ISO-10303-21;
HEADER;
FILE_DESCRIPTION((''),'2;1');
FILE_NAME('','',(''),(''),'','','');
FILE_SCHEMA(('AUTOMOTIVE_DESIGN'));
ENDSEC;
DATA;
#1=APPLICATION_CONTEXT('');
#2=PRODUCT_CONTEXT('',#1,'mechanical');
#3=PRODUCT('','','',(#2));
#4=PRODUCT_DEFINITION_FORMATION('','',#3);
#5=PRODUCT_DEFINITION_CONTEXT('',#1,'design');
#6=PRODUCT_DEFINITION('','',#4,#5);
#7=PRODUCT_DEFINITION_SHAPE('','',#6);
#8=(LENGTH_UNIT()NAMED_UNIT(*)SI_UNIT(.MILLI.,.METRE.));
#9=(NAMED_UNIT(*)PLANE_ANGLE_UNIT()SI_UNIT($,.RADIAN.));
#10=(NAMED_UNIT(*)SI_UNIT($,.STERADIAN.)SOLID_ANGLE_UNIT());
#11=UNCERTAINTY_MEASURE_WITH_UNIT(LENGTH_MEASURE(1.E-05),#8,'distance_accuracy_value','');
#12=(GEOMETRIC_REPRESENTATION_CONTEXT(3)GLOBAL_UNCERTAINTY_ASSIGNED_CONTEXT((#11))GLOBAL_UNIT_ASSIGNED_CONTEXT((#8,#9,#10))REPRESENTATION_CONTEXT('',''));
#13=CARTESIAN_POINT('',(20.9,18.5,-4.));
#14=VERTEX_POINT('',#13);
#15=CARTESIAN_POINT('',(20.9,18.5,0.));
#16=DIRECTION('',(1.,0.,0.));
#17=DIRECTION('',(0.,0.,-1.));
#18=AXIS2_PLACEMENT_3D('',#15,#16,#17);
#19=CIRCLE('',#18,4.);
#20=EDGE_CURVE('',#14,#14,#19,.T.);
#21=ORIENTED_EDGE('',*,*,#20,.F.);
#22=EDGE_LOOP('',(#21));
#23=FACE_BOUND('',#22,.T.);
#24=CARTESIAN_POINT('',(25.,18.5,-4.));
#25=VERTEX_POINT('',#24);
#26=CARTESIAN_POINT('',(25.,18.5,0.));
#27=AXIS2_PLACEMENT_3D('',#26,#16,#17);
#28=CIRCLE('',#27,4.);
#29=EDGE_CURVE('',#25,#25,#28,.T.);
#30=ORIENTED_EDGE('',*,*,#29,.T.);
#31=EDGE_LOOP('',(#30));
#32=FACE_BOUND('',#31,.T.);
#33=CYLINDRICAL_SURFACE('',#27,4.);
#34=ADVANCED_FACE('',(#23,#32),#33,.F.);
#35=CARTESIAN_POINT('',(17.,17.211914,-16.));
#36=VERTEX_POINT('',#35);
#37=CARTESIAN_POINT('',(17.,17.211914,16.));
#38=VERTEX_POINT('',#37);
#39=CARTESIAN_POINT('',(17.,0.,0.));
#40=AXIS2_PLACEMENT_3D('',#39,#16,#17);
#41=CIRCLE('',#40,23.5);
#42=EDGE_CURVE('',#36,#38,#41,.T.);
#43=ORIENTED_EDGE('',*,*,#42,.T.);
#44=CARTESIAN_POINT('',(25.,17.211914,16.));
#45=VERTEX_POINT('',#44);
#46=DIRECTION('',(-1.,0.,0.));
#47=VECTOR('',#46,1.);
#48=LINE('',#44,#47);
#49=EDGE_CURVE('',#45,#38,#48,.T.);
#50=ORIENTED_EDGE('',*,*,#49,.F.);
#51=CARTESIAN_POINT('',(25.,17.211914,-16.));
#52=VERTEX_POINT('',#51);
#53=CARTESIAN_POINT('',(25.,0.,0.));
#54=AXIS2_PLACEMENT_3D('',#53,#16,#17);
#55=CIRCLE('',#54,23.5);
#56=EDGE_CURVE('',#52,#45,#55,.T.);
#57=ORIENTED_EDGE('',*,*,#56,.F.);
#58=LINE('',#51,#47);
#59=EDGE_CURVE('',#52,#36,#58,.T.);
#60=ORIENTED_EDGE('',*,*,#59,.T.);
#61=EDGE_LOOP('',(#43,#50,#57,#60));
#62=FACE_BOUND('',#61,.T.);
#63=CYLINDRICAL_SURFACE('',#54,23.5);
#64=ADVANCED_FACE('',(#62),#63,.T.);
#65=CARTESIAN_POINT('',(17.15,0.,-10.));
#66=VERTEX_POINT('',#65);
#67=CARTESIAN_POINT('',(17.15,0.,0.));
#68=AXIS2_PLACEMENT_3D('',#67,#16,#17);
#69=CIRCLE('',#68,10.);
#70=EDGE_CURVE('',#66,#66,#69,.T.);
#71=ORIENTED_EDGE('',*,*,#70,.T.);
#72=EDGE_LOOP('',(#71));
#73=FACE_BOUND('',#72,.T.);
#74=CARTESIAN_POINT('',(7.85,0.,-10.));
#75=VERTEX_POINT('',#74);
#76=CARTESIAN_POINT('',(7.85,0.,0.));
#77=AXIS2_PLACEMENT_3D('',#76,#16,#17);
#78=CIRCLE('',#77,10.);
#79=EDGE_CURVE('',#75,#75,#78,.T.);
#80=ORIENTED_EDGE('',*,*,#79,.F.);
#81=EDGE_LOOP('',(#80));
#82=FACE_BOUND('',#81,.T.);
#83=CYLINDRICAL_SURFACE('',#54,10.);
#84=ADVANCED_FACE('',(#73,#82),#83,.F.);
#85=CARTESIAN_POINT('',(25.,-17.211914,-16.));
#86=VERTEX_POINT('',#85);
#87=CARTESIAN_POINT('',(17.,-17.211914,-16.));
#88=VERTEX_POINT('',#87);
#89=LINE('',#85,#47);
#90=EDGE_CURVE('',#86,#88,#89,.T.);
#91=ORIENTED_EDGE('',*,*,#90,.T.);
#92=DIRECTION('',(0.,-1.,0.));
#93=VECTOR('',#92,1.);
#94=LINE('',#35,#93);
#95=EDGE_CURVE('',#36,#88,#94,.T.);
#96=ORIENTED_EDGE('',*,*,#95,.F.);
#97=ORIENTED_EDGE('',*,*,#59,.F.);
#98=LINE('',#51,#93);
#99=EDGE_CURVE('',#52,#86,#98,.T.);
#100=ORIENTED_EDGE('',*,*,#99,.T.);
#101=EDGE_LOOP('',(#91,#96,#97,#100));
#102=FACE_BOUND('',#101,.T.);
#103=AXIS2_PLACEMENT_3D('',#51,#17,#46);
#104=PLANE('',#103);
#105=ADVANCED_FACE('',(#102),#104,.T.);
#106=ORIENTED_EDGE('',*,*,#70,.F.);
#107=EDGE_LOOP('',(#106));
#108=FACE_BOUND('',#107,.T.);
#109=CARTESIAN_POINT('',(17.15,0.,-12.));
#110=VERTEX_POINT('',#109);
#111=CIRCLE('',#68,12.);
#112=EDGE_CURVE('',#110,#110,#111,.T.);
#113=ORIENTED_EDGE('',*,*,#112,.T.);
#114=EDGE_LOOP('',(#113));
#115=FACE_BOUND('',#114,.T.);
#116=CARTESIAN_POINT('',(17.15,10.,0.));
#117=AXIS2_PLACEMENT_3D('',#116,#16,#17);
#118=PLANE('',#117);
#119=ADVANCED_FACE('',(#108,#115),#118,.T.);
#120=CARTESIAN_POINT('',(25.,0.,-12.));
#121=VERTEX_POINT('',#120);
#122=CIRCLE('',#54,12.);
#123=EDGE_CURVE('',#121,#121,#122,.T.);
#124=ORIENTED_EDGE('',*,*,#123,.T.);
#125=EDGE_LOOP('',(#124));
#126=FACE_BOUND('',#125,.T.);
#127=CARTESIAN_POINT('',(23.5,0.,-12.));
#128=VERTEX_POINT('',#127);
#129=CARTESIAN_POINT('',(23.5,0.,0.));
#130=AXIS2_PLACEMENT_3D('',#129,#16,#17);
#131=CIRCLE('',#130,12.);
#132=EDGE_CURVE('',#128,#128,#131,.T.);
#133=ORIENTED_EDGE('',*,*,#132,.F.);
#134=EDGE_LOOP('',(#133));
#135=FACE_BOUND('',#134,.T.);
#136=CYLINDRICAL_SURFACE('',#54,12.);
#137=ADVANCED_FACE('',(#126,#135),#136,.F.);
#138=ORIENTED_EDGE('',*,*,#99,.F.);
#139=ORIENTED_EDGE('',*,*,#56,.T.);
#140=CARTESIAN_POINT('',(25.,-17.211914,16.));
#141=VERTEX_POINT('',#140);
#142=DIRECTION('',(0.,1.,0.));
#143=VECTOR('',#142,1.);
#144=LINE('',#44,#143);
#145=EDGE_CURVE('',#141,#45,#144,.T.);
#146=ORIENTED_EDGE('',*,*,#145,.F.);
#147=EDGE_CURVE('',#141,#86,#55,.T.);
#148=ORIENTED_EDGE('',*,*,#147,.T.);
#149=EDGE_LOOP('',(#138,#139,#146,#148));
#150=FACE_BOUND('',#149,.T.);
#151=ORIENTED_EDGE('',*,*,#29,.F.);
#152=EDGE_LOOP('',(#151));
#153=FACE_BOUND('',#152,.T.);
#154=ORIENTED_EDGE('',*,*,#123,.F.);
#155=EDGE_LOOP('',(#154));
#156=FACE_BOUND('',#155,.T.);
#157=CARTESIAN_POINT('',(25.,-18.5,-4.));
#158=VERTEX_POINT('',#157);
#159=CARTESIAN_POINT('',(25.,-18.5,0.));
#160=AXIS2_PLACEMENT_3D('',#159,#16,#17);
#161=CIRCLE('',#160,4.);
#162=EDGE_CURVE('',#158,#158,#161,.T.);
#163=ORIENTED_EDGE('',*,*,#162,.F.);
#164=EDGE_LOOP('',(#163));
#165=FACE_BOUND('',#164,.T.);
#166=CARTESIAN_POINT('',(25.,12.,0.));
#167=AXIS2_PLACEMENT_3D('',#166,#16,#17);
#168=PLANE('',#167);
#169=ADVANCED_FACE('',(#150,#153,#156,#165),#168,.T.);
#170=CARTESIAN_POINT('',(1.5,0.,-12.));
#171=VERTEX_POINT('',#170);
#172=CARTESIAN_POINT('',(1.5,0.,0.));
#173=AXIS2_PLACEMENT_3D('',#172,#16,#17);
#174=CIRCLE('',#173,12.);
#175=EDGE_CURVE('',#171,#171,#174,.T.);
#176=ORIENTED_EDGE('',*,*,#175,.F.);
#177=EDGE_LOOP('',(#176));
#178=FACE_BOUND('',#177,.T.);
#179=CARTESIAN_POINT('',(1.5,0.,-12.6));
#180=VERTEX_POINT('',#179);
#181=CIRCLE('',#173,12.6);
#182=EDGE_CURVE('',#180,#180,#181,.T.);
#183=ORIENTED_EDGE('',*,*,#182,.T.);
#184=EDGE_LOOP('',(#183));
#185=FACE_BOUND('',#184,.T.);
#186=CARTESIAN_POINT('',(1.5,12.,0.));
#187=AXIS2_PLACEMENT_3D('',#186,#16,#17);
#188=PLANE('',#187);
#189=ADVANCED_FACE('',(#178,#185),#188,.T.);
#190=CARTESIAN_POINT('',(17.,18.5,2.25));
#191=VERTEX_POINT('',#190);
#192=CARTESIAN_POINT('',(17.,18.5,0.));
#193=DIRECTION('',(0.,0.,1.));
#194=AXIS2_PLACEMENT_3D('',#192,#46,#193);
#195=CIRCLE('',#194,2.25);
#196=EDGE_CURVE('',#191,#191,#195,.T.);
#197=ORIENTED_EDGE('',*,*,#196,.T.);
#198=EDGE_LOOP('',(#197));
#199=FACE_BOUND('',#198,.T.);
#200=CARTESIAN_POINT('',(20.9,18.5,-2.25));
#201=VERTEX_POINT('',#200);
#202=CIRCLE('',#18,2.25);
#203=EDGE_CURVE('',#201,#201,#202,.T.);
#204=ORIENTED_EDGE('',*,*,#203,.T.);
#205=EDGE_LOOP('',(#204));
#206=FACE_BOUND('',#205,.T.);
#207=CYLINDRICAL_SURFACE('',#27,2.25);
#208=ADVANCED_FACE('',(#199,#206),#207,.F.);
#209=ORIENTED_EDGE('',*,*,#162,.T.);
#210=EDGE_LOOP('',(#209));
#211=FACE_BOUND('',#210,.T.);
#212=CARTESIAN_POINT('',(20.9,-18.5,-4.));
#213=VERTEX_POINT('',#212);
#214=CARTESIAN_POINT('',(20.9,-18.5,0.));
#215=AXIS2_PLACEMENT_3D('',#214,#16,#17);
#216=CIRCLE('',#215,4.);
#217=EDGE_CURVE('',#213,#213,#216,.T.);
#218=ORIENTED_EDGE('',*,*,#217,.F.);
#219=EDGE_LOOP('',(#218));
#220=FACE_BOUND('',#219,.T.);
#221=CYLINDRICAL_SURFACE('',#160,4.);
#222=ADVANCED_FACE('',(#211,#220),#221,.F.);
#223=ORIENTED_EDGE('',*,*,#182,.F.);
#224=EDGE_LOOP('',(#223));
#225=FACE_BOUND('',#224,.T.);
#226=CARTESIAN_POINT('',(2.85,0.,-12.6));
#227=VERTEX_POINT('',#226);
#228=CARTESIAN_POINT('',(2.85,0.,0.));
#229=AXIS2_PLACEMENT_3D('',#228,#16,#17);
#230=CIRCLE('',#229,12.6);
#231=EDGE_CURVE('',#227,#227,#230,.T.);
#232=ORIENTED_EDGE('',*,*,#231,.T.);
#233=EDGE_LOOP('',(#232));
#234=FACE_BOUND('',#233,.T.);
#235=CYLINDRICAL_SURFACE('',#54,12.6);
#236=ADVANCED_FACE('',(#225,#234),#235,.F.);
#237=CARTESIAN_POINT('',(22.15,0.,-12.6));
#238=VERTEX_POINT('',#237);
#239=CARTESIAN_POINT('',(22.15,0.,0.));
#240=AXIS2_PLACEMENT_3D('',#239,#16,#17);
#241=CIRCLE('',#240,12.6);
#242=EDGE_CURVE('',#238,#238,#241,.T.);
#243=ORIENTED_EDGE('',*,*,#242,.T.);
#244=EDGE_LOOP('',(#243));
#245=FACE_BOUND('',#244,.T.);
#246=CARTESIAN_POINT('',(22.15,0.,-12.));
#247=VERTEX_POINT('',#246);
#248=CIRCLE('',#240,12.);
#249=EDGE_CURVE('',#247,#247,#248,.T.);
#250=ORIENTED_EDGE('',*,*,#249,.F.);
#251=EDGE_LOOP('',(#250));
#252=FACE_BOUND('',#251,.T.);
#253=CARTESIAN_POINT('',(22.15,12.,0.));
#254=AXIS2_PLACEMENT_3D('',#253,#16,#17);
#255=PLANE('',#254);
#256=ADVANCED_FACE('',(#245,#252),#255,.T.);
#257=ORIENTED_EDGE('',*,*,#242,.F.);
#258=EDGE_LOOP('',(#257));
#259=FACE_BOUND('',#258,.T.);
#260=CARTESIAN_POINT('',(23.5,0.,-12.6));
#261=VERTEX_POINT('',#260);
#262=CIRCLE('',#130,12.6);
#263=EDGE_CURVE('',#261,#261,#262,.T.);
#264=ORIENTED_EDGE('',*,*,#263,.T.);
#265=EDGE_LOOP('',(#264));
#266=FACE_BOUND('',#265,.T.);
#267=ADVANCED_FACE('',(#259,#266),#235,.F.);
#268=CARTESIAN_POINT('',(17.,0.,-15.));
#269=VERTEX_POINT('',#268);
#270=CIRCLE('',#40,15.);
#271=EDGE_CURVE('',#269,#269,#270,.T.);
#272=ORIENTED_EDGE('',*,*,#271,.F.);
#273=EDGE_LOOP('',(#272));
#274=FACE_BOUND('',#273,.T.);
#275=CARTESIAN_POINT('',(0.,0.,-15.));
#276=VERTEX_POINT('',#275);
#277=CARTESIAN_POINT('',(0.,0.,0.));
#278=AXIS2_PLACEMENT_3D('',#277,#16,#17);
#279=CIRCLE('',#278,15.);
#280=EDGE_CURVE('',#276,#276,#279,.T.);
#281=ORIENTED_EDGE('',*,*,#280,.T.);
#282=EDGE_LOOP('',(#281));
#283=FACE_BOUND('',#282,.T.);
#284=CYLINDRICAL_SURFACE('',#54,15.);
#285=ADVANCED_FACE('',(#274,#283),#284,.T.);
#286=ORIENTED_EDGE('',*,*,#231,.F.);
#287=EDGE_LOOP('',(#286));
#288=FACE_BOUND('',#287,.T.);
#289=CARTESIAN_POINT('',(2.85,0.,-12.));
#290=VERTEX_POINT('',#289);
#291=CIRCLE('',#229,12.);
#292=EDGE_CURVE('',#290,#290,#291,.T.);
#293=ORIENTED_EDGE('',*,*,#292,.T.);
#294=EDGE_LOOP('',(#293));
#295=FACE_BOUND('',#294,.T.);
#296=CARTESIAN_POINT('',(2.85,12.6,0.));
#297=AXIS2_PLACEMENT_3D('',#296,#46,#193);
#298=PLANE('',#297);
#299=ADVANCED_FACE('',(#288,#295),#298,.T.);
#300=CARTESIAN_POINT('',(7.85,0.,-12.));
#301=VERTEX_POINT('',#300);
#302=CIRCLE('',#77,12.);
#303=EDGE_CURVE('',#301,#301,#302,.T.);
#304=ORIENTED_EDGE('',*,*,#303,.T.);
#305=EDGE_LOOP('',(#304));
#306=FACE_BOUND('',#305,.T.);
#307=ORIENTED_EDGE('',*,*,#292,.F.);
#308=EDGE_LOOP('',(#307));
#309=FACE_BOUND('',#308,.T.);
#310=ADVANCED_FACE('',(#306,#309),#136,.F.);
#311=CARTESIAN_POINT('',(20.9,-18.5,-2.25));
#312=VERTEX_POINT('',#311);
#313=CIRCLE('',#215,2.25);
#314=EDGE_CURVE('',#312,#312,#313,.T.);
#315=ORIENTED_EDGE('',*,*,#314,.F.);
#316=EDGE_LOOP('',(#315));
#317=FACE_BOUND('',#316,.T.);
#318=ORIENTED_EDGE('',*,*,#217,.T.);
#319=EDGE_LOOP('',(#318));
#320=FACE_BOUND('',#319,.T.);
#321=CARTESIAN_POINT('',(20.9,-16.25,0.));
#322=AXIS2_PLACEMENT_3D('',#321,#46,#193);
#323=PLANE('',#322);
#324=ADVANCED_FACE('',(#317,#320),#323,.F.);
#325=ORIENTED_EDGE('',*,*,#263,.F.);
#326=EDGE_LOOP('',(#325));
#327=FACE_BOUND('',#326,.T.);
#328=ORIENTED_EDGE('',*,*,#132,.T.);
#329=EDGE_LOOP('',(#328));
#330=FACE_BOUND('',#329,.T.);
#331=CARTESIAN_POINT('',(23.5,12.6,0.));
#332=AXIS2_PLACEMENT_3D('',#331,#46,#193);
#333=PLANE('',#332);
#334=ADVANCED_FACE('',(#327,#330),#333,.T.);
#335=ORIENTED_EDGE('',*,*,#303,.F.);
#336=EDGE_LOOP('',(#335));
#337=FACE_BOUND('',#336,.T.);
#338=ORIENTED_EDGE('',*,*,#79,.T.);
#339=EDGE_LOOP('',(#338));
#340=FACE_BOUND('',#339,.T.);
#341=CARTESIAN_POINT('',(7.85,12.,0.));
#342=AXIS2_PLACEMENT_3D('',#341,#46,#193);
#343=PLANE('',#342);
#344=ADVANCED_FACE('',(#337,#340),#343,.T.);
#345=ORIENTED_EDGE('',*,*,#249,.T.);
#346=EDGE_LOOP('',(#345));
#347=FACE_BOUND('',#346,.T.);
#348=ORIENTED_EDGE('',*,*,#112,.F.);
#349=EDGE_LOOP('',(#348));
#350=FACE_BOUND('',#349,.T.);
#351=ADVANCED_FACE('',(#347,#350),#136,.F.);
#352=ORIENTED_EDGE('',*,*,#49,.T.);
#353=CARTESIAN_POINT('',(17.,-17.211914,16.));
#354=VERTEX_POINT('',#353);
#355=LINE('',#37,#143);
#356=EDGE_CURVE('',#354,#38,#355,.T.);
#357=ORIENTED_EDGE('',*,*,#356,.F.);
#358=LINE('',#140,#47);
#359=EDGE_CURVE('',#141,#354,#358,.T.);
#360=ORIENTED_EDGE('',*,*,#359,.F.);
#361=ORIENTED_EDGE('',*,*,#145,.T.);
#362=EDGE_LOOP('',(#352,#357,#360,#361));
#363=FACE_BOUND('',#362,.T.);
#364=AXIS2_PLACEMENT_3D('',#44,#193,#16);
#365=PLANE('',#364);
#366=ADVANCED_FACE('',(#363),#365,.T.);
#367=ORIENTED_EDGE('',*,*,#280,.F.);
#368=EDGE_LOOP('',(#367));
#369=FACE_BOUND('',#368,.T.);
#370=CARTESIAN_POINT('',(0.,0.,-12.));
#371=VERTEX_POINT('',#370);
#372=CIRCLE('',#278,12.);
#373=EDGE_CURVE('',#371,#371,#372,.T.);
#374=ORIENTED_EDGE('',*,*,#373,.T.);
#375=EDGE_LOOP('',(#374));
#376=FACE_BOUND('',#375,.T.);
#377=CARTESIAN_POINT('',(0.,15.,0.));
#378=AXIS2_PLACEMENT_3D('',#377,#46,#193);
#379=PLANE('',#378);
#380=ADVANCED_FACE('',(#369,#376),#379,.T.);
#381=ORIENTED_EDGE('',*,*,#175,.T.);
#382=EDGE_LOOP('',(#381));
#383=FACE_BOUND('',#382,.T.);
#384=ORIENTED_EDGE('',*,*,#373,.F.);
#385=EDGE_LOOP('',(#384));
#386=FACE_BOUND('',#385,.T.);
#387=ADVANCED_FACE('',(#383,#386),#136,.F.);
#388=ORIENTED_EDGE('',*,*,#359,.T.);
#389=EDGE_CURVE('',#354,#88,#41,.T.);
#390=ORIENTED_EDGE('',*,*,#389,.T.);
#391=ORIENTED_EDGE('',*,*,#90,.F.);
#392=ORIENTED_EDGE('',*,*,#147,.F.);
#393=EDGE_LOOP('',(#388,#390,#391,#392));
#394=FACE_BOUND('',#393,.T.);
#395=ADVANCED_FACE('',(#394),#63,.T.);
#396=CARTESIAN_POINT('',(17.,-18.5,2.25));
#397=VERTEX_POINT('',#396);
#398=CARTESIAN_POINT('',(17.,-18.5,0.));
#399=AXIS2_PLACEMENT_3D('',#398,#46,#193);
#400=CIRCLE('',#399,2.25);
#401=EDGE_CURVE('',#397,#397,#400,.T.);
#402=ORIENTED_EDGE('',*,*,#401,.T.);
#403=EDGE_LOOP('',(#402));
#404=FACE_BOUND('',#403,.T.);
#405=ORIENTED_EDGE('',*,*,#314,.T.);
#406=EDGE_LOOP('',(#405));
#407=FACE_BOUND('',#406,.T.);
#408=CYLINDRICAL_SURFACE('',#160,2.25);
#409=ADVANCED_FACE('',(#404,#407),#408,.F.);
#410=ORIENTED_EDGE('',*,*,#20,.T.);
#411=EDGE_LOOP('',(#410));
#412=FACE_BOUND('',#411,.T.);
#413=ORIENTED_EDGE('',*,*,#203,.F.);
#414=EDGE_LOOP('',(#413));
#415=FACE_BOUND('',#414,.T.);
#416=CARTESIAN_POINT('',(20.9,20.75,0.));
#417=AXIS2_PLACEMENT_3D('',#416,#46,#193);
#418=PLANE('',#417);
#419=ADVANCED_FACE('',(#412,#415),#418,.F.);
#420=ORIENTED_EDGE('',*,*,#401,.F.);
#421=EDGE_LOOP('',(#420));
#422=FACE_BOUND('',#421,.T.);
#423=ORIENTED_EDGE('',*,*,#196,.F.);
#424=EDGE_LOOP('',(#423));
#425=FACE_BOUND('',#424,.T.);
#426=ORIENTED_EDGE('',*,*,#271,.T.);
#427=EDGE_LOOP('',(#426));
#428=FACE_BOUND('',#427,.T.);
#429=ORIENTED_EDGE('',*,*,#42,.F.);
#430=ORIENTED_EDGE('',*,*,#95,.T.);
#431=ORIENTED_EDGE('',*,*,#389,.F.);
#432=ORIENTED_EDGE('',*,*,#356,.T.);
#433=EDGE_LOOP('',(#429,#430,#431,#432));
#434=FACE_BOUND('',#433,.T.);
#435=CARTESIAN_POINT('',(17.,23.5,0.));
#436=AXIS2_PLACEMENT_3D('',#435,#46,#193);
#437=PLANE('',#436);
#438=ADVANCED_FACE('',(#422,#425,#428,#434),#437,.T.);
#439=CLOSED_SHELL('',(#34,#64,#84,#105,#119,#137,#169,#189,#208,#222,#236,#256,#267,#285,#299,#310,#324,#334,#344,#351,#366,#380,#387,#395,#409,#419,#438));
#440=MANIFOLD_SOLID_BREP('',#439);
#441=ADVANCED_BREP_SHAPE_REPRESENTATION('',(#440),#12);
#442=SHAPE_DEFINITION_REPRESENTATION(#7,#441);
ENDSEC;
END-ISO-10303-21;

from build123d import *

# Parameters (mm, degrees)
CBORE_SOCKET_HEAD_CAP_SCREW1_D           = 4.5
CBORE_SOCKET_HEAD_CAP_SCREW1_CBORE_D     = 8
CBORE_SOCKET_HEAD_CAP_SCREW1_CBORE_DEPTH = 4.1
DELETEFACE1_START                        = 17
DELETEFACE1_OUTLINE_R                    = 4
DELETEFACE1_DEPTH                        = 8
CUT_EXTRUDE2_DEPTH                       = 38.32961291
CBORE_SOCKET_HEAD_CAP_SCREW2_D           = 4.5
CBORE_SOCKET_HEAD_CAP_SCREW2_CBORE_D     = 8
CBORE_SOCKET_HEAD_CAP_SCREW2_CBORE_DEPTH = 4.1


# Read off the part's stored shape, not the designer's step: DeleteFace1
with BuildPart() as part:
    # Sketch1 → Revolve1 (revolve)
    with BuildSketch(Plane.XY, mode=Mode.PRIVATE) as revolve1_sk:
        Polygon((25, 12), (25, 23.5), (17, 23.5), (17, 15), (0, 15), (0, 12), (1.5, 12), (1.5, 12.6), (2.85, 12.6), (2.85, 12), (7.85, 12), (7.85, 10), (17.15, 10), (17.15, 12), (22.15, 12), (22.15, 12.6), (23.5, 12.6), (23.5, 12), align=None)
    revolve(revolve1_sk.sketch.rotate(Axis((25, 0, 0), (-1, 0, 0)), 90), axis=Axis((25, 0, 0), (-1, 0, 0)))

    # CBORE Socket Head Cap Screw1 (through all)
    with Locations(Plane(origin=(25, 0, 0), x_dir=(0, 0, -1), z_dir=(1, 0, 0))):
        with Locations((0, 18.5), (18.5, 0), (-18.5, 0), (0, -18.5)):
            CounterBoreHole(CBORE_SOCKET_HEAD_CAP_SCREW1_D / 2, CBORE_SOCKET_HEAD_CAP_SCREW1_CBORE_D / 2, CBORE_SOCKET_HEAD_CAP_SCREW1_CBORE_DEPTH)

    # DeleteFace1 outline → DeleteFace1 (add)
    with BuildSketch(Plane.YZ.offset(DELETEFACE1_START)):
        with Locations((-18.5, 0)):
            Circle(DELETEFACE1_OUTLINE_R)
        with Locations((0, 18.5)):
            Circle(DELETEFACE1_OUTLINE_R)
        with Locations((0, -18.5)):
            Circle(DELETEFACE1_OUTLINE_R)
        with Locations((18.5, 0)):
            Circle(DELETEFACE1_OUTLINE_R)
    extrude(amount=DELETEFACE1_DEPTH)

    # Sketch5 → Cut-Extrude2 (cut, through all)
    with BuildSketch(Plane(origin=(17, 0, 0), x_dir=(0, 0, -1), z_dir=(1, 0, 0))):
        with BuildLine():
            Line((-16, 17.211914478), (-16, -17.211914478))
            ThreePointArc((-16, -17.211914478), (-23.5, 0), (-16, 17.211914478))
        make_face()
        with BuildLine():
            Line((16, 17.211914478), (16, -17.211914478))
            ThreePointArc((16, -17.211914478), (23.5, 0), (16, 17.211914478))
        make_face()
    extrude(amount=CUT_EXTRUDE2_DEPTH, mode=Mode.SUBTRACT)

    # CBORE Socket Head Cap Screw2 (through all)
    with Locations(Plane(origin=(25, 0, 0), x_dir=(0, 0, -1), z_dir=(1, 0, 0))):
        with Locations((0, 18.5), (0, -18.5)):
            CounterBoreHole(CBORE_SOCKET_HEAD_CAP_SCREW2_D / 2, CBORE_SOCKET_HEAD_CAP_SCREW2_CBORE_D / 2, CBORE_SOCKET_HEAD_CAP_SCREW2_CBORE_DEPTH)


solid = part.part
